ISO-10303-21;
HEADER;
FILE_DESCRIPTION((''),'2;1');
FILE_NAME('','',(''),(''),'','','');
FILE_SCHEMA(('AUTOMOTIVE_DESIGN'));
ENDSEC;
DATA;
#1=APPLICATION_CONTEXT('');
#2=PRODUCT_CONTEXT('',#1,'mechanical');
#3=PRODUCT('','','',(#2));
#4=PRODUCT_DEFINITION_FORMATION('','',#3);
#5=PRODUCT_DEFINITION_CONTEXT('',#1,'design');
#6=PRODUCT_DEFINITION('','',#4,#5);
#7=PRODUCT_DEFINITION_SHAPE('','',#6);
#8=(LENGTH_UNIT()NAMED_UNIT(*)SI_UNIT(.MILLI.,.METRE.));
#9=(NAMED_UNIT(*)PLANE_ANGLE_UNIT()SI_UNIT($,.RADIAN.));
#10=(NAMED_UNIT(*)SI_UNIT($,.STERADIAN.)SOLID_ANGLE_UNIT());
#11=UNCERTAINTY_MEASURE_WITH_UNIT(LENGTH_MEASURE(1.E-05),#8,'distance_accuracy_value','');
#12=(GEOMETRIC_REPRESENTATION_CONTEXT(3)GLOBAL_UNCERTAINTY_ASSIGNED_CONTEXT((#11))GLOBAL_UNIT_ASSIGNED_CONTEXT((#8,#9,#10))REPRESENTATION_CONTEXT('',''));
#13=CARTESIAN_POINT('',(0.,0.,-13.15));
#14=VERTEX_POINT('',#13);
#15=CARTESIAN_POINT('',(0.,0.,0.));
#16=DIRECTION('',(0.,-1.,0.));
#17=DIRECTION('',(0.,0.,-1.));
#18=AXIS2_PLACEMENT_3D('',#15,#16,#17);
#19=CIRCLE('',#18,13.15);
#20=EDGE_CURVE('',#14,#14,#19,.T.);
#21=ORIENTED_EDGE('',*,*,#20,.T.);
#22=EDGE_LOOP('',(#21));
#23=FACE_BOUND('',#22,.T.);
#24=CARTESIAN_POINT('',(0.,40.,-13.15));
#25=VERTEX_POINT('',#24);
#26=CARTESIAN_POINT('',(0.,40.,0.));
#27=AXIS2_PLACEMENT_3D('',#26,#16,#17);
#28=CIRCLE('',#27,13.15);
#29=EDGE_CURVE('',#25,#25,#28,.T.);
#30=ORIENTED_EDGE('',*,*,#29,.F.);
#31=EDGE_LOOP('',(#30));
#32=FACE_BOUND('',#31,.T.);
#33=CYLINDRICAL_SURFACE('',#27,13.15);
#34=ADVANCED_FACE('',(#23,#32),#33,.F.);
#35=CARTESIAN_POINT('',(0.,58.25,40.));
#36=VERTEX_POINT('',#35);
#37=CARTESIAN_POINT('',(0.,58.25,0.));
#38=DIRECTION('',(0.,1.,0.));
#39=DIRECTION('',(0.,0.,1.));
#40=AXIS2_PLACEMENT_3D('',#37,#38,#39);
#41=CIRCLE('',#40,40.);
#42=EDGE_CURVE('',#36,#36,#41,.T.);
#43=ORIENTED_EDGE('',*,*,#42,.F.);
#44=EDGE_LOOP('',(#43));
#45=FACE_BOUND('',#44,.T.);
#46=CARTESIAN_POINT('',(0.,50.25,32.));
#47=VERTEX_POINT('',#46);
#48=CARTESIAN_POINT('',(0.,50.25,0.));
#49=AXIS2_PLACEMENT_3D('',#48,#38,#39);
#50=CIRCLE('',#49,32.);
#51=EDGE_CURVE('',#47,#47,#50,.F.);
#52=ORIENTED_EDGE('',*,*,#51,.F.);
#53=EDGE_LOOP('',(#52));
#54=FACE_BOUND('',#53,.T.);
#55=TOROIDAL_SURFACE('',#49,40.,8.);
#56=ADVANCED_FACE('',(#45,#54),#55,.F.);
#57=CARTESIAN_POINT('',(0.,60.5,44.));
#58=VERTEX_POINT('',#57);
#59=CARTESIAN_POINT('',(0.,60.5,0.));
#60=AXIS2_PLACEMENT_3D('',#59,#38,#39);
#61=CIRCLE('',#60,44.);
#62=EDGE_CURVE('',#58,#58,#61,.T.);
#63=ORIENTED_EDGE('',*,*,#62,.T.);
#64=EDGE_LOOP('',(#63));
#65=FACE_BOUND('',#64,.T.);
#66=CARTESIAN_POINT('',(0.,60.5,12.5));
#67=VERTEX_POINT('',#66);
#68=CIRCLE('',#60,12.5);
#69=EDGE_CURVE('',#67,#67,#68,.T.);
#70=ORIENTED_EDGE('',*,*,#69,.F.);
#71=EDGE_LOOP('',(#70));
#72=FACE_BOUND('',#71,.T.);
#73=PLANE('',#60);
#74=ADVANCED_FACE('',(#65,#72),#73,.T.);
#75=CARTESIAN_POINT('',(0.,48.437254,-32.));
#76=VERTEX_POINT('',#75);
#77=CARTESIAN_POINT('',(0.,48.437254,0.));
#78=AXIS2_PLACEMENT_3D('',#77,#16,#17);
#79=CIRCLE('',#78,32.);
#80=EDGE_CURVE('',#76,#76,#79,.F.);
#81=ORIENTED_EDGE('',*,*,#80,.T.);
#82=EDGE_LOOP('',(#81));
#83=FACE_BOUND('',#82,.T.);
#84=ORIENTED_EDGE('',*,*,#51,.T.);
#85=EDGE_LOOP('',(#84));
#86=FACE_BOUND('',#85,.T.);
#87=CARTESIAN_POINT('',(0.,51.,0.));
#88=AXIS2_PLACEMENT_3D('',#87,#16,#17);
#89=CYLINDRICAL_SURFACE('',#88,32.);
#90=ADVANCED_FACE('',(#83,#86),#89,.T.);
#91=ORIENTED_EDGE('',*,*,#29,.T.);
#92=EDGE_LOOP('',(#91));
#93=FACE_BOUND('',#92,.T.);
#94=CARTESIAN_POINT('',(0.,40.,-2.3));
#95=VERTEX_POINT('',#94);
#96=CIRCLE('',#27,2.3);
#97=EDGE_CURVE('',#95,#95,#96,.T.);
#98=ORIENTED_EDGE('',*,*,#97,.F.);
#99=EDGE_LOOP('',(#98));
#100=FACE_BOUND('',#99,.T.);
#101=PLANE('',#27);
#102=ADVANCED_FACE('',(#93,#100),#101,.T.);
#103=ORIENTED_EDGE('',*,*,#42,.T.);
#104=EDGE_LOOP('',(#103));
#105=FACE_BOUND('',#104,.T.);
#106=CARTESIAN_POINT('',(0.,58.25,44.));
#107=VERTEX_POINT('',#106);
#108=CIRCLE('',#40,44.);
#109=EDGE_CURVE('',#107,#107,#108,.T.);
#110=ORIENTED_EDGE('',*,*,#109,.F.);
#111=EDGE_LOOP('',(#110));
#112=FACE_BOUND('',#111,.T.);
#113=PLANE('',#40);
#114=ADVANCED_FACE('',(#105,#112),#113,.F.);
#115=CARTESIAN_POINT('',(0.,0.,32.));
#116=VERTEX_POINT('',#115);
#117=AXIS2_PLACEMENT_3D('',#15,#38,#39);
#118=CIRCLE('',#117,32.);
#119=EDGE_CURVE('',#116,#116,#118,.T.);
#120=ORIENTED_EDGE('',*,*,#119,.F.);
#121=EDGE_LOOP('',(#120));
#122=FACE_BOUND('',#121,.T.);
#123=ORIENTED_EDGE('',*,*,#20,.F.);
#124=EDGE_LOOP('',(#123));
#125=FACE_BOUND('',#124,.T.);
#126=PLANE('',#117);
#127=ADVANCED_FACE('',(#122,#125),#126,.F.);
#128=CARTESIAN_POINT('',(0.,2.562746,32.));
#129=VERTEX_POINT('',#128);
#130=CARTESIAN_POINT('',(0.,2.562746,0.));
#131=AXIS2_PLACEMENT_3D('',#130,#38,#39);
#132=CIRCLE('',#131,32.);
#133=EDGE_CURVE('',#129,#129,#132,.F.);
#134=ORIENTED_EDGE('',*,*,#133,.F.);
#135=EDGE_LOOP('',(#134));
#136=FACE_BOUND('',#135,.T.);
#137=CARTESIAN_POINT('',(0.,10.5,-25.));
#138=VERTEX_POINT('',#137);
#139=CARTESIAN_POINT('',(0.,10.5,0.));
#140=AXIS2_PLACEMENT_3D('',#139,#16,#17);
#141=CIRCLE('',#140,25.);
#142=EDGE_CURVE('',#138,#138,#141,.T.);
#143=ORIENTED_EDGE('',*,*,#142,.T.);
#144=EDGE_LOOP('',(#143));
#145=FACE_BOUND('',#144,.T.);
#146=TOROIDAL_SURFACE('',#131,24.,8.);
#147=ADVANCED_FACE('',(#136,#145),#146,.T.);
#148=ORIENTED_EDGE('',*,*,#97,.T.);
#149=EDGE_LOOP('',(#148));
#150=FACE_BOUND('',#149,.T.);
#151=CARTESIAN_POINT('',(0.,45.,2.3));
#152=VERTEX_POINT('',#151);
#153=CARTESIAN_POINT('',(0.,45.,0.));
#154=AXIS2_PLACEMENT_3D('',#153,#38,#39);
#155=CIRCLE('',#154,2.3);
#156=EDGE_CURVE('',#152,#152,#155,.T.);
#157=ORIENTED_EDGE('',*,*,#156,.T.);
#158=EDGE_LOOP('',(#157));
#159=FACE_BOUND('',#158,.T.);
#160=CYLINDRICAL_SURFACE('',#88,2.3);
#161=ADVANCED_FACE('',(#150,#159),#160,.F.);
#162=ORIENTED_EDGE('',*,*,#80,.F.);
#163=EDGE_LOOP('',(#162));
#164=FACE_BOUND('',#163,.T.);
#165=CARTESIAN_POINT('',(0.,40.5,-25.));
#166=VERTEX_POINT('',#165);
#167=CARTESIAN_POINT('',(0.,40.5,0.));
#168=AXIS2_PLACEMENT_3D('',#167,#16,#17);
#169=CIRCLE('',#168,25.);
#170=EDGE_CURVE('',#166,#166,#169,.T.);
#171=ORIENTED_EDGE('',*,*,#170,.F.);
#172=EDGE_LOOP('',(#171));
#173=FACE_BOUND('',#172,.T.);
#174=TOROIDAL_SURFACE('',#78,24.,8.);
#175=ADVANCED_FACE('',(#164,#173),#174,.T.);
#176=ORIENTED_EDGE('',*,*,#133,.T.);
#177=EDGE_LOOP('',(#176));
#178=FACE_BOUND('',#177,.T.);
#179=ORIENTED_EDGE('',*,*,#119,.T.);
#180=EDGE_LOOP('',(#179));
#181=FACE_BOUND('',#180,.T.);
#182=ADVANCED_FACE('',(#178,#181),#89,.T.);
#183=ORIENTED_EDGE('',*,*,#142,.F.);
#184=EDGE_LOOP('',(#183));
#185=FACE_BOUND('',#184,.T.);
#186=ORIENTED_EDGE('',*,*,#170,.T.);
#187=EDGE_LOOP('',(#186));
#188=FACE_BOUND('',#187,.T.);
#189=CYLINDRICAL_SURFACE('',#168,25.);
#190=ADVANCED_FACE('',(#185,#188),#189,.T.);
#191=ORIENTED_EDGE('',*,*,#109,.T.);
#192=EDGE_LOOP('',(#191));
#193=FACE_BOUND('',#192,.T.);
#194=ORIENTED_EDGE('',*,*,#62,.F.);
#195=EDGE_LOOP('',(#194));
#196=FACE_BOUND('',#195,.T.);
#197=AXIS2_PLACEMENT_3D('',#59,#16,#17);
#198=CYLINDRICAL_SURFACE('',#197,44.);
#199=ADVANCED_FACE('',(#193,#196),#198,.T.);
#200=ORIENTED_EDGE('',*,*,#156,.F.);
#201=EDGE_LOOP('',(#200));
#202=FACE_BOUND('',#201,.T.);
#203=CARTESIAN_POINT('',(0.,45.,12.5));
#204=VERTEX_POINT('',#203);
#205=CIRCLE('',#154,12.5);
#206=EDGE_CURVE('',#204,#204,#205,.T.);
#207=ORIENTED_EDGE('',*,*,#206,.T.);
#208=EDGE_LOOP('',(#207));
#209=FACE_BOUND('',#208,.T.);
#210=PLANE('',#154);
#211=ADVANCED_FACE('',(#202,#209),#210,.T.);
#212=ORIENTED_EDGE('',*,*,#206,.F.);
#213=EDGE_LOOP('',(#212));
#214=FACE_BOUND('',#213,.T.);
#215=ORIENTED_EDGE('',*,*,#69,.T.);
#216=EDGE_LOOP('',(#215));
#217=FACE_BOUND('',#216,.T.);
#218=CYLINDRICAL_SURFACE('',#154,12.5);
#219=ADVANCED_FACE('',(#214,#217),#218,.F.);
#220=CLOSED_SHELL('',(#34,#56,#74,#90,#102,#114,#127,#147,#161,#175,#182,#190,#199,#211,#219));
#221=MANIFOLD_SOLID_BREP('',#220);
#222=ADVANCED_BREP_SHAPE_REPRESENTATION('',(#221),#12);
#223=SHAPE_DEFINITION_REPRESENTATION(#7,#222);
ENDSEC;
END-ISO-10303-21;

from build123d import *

# Parameters (mm, degrees)
SKETCH_1_R          = 32
SKETCH_1_R_2        = 2.3
EXTRUDE_1_DEPTH     = 51
SKETCH_2_R          = 13.15
CUT_EXTRUDE_1_DEPTH = 40
CUT_EXTRUDE_START   = -10.5
SKETCH_16_R         = 36.699938781
SKETCH_16_R_2       = 25
CUT_EXTRUDE_5_DEPTH = 30
FILLET_4_R          = 8
SKETCH_17_R         = 12.5
CUT_EXTRUDE_6_DEPTH = 6
SKETCH_18_R         = 32
SKETCH_18_R_2       = 12.5
EXTRUDE_2_DEPTH     = 7.25
SKETCH_19_R         = 44
SKETCH_19_R_2       = 12.5
EXTRUDE_3_DEPTH     = 2.25
FILLET_5_R          = 8


with BuildPart() as part:
    # Эскиз1 → Бобышка-Вытянуть1 (new body)
    with BuildSketch(Plane(origin=(0, 0, 0), x_dir=(1, 0, 0), z_dir=(0, 1, 0))):
        with Locations(Location((0, 0, 0), (0, 0, 270))):
            Circle(SKETCH_1_R)
        with Locations(Location((0, 0, 0), (0, 0, 270))):
            Circle(SKETCH_1_R_2, mode=Mode.SUBTRACT)
    extrude(amount=EXTRUDE_1_DEPTH)

    # Эскиз2 → Вырез-Вытянуть1 (cut)
    with BuildSketch(Plane.XZ):
        with Locations(Location((0, 0, 0), (0, 0, 270))):
            Circle(SKETCH_2_R)
    extrude(amount=-CUT_EXTRUDE_1_DEPTH, mode=Mode.SUBTRACT)

    # Эскиз16 → Вырез-Вытянуть5 (cut)
    with BuildSketch(Plane.XZ.offset(CUT_EXTRUDE_START)):
        Circle(SKETCH_16_R)
        with Locations(Location((0, 0, 0), (0, 0, 270))):
            Circle(SKETCH_16_R_2, mode=Mode.SUBTRACT)
    extrude(amount=-CUT_EXTRUDE_5_DEPTH, mode=Mode.SUBTRACT)

    # Скругление4
    # the kernel refuses this fillet: 8 mm, written as the material it takes off along each edge
    with BuildSketch(Plane(origin=(0, 10.5, 0), x_dir=(0, 0, 1), z_dir=(1, 0, 0))) as fillet_4_piece_1:
        with BuildLine():
            CenterArc((24, 7.937253933), FILLET_4_R, 277.180755781, 82.819244219)
            Line((25, 0), (25.02, -0.158745079))
            ThreePointArc((25.02, -0.158745079), (28.5, -0.16), (32, -0.16))
            Line((32, -0.16), (32.16, 0))
            Line((32.16, 0), (32.16, 7.937253933))
            Line((32.16, 7.937253933), (32, 7.937253933))
        make_face()
    revolve(axis=Axis((0, 10.5, 0), (0, -1, 0)), mode=Mode.SUBTRACT)
    with BuildSketch(Plane(origin=(0, 40.5, 0), x_dir=(0, 0, 1), z_dir=(1, 0, 0))) as fillet_4_piece_2:
        with BuildLine():
            CenterArc((24, -7.937253933), FILLET_4_R, 0, 82.819244219)
            Line((32, -7.937253933), (32.16, -7.937253933))
            Line((32.16, -7.937253933), (32.16, 0))
            Line((32.16, 0), (32, 0.16))
            ThreePointArc((32, 0.16), (28.5, 0.16), (25.02, 0.158745079))
            Line((25.02, 0.158745079), (25, 0))
        make_face()
    revolve(axis=Axis((0, 40.5, 0), (0, -1, 0)), mode=Mode.SUBTRACT)

    # Эскиз17 → Вырез-Вытянуть6 (cut)
    with BuildSketch(Plane(origin=(0, 51, 0), x_dir=(1, 0, 0), z_dir=(0, 1, 0))):
        with Locations(Location((0, 0, 0), (0, 0, 270))):
            Circle(SKETCH_17_R)
    extrude(amount=-CUT_EXTRUDE_6_DEPTH, mode=Mode.SUBTRACT)

    # Эскиз18 → Бобышка-Вытянуть2 (add)
    with BuildSketch(Plane(origin=(0, 51, 0), x_dir=(1, 0, 0), z_dir=(0, 1, 0))):
        with Locations(Location((0, 0, 0), (0, 0, 90))):
            Circle(SKETCH_18_R)
        with Locations(Location((0, 0, 0), (0, 0, 270))):
            Circle(SKETCH_18_R_2, mode=Mode.SUBTRACT)
    extrude(amount=EXTRUDE_2_DEPTH)

    # Эскиз19 → Бобышка-Вытянуть3 (add)
    with BuildSketch(Plane(origin=(0, 58.25, 0), x_dir=(1, 0, 0), z_dir=(0, 1, 0))):
        with Locations(Location((0, 0, 0), (0, 0, 270))):
            Circle(SKETCH_19_R)
        with Locations(Location((0, 0, 0), (0, 0, 270))):
            Circle(SKETCH_19_R_2, mode=Mode.SUBTRACT)
    extrude(amount=EXTRUDE_3_DEPTH)

    # Скругление5
    fillet_5_edges = [part.edges().sort_by_distance(p)[0] for p in [
        (0, 58.25, 32),
    ]]
    fillet(fillet_5_edges, radius=FILLET_5_R)


solid = part.part
